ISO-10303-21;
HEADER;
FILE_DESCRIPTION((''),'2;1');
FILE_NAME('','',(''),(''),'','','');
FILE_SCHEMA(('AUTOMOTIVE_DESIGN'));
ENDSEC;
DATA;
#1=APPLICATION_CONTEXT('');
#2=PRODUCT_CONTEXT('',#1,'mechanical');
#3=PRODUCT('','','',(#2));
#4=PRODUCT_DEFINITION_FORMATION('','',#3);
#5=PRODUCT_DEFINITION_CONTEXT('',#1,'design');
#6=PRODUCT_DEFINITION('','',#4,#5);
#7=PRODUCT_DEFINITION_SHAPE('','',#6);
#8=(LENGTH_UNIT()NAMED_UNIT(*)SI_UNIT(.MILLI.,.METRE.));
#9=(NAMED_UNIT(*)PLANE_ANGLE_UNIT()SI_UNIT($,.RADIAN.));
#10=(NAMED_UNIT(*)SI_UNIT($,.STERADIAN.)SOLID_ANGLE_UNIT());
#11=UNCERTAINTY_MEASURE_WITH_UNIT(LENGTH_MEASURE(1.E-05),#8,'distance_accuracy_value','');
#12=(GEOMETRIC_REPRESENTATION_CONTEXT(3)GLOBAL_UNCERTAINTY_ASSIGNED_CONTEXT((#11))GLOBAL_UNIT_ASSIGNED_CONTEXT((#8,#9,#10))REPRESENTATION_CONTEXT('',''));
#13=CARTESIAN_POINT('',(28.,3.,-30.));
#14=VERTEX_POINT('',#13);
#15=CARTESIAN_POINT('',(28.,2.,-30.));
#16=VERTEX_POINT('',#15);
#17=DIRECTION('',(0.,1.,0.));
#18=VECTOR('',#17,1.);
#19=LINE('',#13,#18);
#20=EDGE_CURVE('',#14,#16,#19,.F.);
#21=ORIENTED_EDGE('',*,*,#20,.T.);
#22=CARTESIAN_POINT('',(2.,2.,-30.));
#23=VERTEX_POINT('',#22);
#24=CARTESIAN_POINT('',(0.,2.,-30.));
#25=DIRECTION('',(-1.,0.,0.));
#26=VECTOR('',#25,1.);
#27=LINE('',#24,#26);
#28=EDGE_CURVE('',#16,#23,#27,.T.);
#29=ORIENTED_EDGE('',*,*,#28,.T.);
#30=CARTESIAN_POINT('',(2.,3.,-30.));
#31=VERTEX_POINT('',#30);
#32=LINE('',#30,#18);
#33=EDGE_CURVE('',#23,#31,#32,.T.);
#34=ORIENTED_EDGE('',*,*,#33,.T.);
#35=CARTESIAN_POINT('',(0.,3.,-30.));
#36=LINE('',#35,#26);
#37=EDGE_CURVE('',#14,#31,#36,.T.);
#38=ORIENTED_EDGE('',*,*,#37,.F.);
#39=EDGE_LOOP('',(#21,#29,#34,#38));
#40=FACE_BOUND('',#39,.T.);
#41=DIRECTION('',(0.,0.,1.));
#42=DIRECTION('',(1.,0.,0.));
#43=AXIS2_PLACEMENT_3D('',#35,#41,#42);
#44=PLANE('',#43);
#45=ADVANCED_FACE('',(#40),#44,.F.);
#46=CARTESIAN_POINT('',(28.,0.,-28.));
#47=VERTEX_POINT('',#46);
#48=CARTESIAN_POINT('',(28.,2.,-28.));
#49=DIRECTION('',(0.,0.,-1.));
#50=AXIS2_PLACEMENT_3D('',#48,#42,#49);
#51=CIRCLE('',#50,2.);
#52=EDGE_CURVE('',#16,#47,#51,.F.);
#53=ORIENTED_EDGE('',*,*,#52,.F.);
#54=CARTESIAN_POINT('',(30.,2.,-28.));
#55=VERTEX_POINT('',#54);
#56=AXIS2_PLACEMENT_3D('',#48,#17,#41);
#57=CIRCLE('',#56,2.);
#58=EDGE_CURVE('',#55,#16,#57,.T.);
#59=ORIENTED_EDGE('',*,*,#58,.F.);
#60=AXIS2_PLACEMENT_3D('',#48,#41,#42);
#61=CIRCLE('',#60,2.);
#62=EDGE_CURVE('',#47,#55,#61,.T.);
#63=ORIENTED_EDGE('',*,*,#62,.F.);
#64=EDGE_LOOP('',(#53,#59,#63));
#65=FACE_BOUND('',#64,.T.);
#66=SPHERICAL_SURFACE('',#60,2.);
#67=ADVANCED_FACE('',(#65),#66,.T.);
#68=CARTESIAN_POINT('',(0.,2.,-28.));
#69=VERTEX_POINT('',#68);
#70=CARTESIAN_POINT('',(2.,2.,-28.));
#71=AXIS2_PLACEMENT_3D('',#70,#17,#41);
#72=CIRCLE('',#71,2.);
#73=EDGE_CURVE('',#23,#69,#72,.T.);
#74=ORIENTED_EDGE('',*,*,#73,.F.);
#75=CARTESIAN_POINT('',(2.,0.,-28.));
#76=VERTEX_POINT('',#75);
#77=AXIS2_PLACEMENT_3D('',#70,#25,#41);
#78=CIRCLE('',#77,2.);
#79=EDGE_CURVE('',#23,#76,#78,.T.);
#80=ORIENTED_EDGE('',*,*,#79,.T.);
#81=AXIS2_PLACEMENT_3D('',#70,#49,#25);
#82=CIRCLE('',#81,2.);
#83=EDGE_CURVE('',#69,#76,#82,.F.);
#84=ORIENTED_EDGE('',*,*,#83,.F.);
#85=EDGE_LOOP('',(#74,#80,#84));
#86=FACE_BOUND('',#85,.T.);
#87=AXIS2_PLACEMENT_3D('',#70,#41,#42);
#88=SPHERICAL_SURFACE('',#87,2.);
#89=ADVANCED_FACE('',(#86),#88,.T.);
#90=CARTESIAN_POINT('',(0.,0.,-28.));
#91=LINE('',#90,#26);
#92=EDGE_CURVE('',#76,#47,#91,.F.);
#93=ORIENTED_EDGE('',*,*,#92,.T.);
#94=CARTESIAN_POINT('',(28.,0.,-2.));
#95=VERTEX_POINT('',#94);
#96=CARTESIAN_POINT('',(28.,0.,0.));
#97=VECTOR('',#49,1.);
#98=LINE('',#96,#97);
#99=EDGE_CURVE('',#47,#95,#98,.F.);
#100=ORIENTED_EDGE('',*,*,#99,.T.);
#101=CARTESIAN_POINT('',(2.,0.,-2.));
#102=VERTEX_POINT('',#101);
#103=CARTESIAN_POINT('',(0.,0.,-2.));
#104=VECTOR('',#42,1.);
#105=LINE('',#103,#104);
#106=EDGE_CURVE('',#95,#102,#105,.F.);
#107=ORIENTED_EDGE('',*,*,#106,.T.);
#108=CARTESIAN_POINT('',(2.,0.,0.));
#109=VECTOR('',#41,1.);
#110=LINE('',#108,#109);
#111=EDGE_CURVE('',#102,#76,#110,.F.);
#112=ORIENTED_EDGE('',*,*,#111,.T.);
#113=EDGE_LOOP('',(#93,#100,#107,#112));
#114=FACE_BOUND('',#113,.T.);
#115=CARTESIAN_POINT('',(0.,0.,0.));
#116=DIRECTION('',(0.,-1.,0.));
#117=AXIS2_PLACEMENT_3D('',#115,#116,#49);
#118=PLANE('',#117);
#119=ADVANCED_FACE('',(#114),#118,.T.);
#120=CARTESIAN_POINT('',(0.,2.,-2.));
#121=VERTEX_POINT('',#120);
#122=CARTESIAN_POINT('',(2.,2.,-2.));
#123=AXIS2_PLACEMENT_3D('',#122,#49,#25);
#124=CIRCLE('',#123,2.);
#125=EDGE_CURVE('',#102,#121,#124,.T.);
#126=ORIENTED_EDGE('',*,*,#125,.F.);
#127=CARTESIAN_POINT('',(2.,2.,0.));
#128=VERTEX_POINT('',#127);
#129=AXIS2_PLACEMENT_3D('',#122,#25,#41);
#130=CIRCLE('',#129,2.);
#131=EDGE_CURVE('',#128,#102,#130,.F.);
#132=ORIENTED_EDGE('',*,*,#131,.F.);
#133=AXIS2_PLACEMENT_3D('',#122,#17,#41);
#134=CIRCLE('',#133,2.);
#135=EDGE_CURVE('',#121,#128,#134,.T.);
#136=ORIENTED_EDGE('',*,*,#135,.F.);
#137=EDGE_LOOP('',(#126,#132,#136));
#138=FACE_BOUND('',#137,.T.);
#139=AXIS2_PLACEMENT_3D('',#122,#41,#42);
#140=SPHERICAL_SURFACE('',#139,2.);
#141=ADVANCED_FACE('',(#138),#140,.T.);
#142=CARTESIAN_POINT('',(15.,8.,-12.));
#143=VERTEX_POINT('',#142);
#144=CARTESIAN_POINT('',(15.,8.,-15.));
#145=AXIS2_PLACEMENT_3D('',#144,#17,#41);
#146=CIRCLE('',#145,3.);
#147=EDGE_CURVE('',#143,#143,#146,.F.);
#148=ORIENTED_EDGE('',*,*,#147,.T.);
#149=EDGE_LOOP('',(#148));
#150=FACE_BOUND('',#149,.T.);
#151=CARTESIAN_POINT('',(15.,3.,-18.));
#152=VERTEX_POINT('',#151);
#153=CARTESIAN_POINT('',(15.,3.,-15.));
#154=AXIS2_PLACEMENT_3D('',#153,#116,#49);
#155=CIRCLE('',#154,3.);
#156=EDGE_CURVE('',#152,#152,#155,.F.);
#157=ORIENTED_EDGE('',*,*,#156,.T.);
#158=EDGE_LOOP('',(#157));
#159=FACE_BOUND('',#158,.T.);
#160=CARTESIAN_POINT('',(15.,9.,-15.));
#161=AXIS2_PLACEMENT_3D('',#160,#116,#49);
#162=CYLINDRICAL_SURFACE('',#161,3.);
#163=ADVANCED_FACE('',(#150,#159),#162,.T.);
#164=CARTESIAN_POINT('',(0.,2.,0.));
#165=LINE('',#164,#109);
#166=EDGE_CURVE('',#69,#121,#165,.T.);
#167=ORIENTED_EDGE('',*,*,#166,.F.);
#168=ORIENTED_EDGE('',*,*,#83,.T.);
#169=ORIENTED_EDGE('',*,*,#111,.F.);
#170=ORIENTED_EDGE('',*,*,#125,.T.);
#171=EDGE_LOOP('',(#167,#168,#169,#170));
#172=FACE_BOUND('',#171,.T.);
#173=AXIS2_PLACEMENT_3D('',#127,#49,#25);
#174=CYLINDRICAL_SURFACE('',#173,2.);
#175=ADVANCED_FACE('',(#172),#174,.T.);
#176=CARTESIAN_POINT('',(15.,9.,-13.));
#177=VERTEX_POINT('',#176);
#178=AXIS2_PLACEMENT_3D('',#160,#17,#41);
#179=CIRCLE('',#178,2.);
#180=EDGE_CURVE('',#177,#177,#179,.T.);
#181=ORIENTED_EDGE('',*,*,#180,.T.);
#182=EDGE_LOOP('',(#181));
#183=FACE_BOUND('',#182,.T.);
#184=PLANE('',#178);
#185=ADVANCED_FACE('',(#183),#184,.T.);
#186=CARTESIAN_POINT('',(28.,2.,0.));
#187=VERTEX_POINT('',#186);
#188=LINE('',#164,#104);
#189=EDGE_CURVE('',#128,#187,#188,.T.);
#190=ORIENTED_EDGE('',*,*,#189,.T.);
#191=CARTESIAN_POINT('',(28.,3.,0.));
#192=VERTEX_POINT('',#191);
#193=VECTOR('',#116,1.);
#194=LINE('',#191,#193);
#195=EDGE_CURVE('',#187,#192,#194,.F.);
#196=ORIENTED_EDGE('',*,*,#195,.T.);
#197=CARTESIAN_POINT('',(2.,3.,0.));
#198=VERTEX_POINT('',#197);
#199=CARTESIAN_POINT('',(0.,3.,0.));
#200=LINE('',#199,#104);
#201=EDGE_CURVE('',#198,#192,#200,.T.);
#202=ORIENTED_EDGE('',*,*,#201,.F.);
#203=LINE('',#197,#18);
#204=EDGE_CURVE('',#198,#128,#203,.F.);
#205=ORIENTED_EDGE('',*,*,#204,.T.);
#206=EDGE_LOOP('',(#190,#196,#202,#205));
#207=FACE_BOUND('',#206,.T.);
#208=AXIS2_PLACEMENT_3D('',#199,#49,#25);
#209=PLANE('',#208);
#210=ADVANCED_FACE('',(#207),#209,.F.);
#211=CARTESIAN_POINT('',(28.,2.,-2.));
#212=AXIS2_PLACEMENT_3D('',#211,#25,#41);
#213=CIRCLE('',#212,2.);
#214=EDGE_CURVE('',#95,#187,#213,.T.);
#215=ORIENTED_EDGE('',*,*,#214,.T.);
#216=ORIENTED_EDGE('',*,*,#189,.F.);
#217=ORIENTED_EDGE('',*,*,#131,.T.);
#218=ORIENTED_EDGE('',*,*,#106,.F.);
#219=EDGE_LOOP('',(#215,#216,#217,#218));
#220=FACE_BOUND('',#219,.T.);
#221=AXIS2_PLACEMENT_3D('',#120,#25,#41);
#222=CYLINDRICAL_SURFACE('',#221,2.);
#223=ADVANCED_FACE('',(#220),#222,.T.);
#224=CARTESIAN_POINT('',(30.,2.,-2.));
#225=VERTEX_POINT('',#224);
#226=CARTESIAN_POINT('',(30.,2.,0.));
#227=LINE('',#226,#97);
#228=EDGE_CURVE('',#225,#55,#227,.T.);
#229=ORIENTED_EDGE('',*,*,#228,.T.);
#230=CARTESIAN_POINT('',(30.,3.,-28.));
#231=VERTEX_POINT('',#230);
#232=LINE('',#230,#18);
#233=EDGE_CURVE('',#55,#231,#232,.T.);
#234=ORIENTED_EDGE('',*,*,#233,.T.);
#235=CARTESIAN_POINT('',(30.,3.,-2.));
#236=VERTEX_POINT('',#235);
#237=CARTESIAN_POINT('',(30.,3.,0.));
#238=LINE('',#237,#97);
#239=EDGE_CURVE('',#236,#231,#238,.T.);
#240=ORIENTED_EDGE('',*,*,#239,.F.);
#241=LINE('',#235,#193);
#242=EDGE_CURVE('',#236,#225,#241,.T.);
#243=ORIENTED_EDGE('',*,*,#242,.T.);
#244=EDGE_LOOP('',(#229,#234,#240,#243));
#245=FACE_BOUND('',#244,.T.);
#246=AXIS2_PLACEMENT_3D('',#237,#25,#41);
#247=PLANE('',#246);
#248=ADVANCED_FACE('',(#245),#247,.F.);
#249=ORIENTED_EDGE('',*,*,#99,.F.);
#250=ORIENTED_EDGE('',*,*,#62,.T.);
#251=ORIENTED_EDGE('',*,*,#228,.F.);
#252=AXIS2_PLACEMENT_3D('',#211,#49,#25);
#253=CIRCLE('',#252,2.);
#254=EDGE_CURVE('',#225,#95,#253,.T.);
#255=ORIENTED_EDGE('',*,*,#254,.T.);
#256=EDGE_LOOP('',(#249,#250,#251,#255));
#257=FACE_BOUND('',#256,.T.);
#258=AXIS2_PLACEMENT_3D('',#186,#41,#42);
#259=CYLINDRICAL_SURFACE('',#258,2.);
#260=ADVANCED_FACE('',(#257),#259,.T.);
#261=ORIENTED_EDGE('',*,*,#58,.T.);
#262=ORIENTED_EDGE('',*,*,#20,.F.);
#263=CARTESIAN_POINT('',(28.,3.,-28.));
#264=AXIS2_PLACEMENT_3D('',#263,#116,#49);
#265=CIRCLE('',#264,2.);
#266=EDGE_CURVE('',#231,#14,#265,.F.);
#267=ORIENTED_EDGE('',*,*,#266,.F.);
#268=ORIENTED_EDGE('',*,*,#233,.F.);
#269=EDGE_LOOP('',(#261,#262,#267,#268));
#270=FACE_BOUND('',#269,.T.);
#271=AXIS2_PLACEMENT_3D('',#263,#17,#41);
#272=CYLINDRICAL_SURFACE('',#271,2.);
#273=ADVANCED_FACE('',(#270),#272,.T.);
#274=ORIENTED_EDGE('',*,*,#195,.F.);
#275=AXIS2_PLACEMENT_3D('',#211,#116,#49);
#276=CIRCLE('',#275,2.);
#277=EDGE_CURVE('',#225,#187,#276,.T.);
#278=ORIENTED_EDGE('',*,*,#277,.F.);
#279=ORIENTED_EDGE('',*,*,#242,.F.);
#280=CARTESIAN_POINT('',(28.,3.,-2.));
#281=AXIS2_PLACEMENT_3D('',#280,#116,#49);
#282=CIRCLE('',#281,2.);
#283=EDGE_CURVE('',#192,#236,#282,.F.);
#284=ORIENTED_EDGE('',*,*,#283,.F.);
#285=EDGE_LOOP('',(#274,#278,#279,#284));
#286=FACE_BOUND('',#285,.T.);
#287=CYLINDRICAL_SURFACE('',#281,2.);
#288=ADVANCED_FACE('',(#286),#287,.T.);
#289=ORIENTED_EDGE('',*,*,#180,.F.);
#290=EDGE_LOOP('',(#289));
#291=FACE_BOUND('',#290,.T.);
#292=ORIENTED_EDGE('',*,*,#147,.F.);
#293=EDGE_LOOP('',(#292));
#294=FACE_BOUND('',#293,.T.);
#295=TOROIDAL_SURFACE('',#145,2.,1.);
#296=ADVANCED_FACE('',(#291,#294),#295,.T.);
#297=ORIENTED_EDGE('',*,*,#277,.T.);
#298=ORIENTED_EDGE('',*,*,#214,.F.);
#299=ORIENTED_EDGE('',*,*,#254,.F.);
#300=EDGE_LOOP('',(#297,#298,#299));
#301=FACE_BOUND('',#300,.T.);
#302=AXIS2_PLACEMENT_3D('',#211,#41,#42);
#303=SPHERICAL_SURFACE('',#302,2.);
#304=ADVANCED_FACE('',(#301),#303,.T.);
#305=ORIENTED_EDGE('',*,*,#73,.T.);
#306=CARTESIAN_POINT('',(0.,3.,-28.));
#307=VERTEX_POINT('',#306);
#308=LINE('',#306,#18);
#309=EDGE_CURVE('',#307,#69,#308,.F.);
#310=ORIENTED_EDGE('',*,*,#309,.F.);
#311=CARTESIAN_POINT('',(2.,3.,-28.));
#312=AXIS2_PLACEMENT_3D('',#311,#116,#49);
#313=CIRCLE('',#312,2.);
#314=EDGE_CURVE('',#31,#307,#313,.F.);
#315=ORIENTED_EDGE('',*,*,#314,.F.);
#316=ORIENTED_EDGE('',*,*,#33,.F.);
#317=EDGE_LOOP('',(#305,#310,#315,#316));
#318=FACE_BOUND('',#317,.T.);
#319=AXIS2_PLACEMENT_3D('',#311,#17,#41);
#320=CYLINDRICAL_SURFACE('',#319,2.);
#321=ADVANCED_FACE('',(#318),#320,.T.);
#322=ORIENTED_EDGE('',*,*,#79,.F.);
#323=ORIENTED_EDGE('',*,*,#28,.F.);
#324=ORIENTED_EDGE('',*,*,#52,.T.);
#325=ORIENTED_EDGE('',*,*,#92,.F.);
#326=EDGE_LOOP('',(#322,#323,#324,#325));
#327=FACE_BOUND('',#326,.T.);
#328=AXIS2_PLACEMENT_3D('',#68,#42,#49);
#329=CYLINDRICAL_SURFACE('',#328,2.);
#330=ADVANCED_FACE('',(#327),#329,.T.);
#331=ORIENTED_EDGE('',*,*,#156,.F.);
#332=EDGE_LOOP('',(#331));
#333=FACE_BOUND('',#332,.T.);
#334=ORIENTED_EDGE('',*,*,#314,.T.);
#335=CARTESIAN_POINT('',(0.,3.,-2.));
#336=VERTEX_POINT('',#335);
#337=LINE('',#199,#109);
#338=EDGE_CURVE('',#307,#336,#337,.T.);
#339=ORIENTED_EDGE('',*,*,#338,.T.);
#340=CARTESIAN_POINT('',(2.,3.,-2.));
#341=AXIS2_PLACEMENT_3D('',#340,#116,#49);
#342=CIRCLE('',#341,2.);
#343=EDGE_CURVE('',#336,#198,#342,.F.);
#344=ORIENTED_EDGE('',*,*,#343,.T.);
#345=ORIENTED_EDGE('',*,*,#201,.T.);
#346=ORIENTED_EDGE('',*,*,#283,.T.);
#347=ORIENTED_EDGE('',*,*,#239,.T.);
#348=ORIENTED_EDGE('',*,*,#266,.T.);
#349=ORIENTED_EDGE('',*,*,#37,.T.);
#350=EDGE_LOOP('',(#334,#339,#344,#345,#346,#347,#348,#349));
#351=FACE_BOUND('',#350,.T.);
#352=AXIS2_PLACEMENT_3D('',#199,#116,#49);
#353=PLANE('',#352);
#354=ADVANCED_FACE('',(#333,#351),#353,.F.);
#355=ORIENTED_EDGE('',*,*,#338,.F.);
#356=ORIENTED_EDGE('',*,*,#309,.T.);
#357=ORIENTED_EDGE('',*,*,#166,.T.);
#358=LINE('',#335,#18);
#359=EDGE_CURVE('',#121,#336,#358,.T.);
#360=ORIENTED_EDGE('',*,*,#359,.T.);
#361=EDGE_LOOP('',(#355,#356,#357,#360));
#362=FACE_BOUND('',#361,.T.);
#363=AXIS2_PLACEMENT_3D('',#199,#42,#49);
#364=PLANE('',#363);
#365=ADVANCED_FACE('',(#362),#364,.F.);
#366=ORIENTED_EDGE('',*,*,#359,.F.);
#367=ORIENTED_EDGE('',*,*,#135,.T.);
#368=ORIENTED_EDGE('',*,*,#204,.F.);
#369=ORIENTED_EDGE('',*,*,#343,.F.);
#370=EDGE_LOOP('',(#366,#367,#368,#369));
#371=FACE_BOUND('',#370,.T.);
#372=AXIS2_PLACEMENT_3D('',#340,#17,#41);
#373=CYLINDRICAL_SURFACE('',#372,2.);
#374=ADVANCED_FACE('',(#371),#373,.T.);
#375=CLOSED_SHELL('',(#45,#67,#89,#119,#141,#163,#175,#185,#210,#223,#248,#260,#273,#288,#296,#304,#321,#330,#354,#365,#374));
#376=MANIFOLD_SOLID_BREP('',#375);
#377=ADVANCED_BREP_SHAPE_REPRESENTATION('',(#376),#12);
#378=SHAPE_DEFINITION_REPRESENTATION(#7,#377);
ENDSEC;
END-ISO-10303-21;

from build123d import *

# Parameters (mm, degrees)
SKETCH1_W           = 30
SKETCH1_H           = 30
BOSS_EXTRUDE1_DEPTH = 3
SKETCH3_R           = 3
BOSS_EXTRUDE2_DEPTH = 6
FILLET2_R           = 1
FILLET3_R           = 2
FILLET4_R           = 2
FILLET5_R           = 2
FILLET6_R           = 2


with BuildPart() as part:
    # Sketch1 → Boss-Extrude1 (new body)
    with BuildSketch(Plane(origin=(0, 0, 0), x_dir=(1, 0, 0), z_dir=(0, 1, 0))):
        with Locations((15, 15)):
            Rectangle(SKETCH1_W, SKETCH1_H)
    extrude(amount=BOSS_EXTRUDE1_DEPTH)

    # Sketch3 → Boss-Extrude2 (add)
    with BuildSketch(Plane(origin=(0, 3, 0), x_dir=(1, 0, 0), z_dir=(0, 1, 0))):
        with Locations(Location((15, 15, 0), (0, 0, 90))):
            Circle(SKETCH3_R)
    extrude(amount=BOSS_EXTRUDE2_DEPTH)

    # Fillet2
    fillet2_edges = [part.edges().sort_by_distance(p)[0] for p in [
        (15, 9, -12),
    ]]
    fillet(fillet2_edges, radius=FILLET2_R)

    # Fillet3
    fillet3_edges = [part.edges().sort_by_distance(p)[0] for p in [
        (15, 0, 0),
        (0, 0, -15),
    ]]
    fillet(fillet3_edges, radius=FILLET3_R)

    # Fillet4
    fillet4_edges = [part.edges().sort_by_distance(p)[0] for p in [
        (30, 0, -16),
        (0.585786438, 0.585786438, -30),
        (30, 0.585786438, -0.585786438),
        (16, 0, -30),
        (0, 2.5, -30),
        (30, 2.5, 0),
    ]]
    fillet(fillet4_edges, radius=FILLET4_R)

    # Fillet5
    # the kernel refuses this fillet: 2 mm, written as the material it takes off along each edge
    with BuildSketch(Plane(origin=(2, 2, -2), x_dir=(-1, 0, 0), z_dir=(0, 0, 1))) as fillet5_piece_1_section:
        Polygon((0, 0), (FILLET5_R, 0), (FILLET5_R, FILLET5_R), (0, FILLET5_R), align=None)
    fillet5_piece_1 = extrude(amount=FILLET5_R, mode=Mode.PRIVATE)
    fillet5_piece_1 = fillet5_piece_1 - Plane(origin=(2, 2, -2), x_dir=(0.7071067811865475, 0.7071067811865475, 0), z_dir=(0, 0, 1)) * Sphere(FILLET5_R, mode=Mode.PRIVATE)
    add(fillet5_piece_1, mode=Mode.SUBTRACT)
    with BuildSketch(Plane(origin=(0, 2, 0), x_dir=(1, 0, 0), z_dir=(0, 1, 0))) as fillet5_piece_2:
        with BuildLine():
            CenterArc((FILLET5_R, FILLET5_R), FILLET5_R, 180, 90)
            Line((0, FILLET5_R), (0, 0))
            Line((0, 0), (FILLET5_R, 0))
        make_face()
    extrude(amount=6, mode=Mode.SUBTRACT)

    # Fillet6
    # the kernel refuses this fillet: 2 mm, written as the material it takes off along each edge
    with BuildSketch(Plane(origin=(28, 2, -28), x_dir=(0, 0, -1), z_dir=(1, 0, 0))) as fillet6_piece_1_section:
        Polygon((0, 0), (FILLET6_R, 0), (FILLET6_R, -FILLET6_R), (0, -FILLET6_R), align=None)
    fillet6_piece_1 = extrude(amount=FILLET6_R, mode=Mode.PRIVATE)
    fillet6_piece_1 = fillet6_piece_1 - Plane(origin=(28, 2, -28), x_dir=(0, 0.7071067811865475, 0.7071067811865475), z_dir=(1, 0, 0)) * Sphere(FILLET6_R, mode=Mode.PRIVATE)
    add(fillet6_piece_1, mode=Mode.SUBTRACT)
    with BuildSketch(Plane(origin=(30, 2, -30), x_dir=(0, 0, 1), z_dir=(0, 1, 0))) as fillet6_piece_2:
        with BuildLine():
            CenterArc((FILLET6_R, -FILLET6_R), FILLET6_R, 90, 90)
            Line((0, -FILLET6_R), (0, 0))
            Line((0, 0), (FILLET6_R, 0))
        make_face()
    extrude(amount=6, mode=Mode.SUBTRACT)


solid = part.part
